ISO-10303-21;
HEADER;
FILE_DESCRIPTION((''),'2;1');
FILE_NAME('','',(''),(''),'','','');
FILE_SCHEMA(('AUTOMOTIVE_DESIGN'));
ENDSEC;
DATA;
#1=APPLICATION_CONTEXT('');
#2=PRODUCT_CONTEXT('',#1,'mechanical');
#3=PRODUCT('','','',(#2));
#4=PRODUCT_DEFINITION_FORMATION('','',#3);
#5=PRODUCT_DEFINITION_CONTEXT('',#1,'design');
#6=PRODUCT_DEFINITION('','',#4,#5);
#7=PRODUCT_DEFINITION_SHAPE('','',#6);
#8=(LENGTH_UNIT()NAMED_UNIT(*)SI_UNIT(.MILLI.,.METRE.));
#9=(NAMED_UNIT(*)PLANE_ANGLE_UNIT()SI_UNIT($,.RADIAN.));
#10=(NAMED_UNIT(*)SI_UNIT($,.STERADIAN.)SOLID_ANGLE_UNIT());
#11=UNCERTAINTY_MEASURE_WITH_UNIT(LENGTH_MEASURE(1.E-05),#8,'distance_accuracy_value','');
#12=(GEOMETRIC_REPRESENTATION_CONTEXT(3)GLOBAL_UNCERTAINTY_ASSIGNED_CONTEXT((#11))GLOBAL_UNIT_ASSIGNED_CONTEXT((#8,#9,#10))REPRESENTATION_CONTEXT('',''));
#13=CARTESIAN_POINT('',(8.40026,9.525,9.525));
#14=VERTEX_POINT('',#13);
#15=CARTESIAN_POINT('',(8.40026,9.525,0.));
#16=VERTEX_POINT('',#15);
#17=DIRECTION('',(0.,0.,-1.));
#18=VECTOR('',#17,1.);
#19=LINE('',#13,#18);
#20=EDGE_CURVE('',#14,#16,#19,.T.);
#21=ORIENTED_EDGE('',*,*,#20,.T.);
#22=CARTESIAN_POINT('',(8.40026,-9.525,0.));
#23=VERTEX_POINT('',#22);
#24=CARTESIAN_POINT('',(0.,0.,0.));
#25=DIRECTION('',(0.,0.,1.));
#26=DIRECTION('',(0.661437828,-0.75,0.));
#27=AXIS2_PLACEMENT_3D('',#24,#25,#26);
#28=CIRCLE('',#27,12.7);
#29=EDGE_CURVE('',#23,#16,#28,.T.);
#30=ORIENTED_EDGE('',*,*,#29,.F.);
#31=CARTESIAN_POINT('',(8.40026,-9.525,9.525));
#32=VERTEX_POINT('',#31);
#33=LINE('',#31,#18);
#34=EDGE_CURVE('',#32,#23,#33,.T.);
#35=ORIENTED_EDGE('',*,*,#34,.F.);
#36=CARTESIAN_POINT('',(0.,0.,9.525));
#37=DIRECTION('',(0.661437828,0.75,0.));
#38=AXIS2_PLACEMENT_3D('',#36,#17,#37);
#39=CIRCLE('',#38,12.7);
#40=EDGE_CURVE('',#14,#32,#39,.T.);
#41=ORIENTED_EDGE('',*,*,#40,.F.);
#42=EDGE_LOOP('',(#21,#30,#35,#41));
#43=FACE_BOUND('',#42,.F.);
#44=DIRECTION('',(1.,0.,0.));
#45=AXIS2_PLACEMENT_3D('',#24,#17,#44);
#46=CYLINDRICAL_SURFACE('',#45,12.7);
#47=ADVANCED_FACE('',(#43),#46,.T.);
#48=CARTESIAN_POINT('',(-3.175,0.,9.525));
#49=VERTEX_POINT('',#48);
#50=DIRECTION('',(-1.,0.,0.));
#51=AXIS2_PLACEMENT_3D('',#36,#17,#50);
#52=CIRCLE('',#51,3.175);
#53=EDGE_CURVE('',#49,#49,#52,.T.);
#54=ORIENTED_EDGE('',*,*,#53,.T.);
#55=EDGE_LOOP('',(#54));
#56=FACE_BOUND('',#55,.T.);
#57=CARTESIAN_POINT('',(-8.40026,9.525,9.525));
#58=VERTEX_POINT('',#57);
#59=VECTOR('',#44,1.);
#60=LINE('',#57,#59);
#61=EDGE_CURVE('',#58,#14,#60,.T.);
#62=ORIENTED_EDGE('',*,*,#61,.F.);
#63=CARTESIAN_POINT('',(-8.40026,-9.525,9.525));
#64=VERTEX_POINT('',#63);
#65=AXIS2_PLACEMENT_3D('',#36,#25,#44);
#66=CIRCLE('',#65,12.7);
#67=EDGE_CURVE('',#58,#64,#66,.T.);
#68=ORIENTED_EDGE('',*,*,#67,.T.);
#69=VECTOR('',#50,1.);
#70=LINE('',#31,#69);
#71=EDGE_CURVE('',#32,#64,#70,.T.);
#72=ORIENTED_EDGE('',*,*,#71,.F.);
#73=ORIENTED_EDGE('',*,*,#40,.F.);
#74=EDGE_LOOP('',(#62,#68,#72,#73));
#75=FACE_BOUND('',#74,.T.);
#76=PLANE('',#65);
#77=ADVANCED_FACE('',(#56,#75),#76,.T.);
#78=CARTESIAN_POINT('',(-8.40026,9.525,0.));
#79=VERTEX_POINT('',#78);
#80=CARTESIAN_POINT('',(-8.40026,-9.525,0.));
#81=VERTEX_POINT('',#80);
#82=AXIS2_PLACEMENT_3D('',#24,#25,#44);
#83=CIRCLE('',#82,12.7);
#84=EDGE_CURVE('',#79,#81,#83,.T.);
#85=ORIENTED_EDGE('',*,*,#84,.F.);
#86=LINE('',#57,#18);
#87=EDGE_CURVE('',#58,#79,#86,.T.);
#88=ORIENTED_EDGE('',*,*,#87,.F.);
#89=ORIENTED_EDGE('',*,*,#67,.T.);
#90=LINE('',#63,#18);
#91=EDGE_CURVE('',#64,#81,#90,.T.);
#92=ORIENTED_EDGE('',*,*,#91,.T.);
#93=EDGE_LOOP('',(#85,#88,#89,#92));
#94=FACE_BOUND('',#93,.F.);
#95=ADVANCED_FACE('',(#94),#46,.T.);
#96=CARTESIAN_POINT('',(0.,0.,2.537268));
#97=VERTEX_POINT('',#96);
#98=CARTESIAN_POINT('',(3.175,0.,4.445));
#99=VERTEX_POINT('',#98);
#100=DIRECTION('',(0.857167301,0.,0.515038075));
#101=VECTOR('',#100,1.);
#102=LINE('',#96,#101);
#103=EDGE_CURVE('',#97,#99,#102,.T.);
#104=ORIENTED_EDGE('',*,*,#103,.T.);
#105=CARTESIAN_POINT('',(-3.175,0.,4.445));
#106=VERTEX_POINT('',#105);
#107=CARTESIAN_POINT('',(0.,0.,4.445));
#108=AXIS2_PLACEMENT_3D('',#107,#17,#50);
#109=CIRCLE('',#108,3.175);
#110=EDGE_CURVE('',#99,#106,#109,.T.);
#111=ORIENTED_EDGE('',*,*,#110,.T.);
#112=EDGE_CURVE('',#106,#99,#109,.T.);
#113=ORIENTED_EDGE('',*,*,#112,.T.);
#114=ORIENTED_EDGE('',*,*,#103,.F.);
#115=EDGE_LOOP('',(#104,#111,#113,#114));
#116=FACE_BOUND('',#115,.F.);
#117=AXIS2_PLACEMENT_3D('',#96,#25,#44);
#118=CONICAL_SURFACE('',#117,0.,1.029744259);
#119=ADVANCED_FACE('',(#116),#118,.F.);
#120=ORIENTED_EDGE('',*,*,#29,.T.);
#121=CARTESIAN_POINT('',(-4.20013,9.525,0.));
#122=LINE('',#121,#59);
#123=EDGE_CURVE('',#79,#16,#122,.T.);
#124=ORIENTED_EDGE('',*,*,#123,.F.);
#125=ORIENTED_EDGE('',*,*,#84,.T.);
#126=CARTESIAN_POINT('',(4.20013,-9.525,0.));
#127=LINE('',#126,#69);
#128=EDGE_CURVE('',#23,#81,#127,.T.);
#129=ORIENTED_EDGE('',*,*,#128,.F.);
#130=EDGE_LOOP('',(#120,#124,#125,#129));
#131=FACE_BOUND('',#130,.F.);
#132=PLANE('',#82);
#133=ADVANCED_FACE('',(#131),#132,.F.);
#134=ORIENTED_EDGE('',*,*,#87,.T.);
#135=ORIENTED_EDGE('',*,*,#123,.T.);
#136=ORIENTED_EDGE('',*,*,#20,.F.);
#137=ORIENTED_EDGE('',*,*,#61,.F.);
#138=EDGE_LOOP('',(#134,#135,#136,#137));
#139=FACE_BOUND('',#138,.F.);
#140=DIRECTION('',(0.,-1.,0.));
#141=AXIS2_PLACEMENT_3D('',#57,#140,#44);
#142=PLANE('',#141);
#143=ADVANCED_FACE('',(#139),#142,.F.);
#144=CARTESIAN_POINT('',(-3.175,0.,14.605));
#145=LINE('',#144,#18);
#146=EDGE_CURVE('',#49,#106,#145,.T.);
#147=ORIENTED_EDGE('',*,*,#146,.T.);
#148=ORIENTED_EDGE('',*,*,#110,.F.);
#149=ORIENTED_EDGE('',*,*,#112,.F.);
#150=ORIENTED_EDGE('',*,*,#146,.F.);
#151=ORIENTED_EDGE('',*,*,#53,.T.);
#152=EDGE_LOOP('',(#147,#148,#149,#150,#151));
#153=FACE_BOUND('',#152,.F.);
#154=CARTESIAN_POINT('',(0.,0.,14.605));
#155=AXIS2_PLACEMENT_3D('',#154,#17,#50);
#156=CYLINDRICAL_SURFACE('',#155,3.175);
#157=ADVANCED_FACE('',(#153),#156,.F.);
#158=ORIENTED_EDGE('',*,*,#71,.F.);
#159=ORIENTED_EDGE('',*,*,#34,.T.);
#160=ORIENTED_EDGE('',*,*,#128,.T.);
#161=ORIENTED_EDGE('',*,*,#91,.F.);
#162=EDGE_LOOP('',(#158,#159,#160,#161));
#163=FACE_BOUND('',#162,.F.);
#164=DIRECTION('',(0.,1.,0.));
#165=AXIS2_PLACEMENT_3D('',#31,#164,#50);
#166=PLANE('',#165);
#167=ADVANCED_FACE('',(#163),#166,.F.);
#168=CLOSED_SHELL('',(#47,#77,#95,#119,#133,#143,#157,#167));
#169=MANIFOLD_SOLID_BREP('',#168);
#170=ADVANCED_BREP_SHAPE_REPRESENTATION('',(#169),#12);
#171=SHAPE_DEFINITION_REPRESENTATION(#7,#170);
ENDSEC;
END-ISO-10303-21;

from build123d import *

# Parameters (mm, degrees)
F0_R     = 12.7
F1_DEPTH = 9.525
F3_D     = 6.35
F3_DEPTH = 5.08
F3_TIP   = 1.9077324654
F5_DEPTH = 25.4


# Not quite as in the source:
# - a feature names something its author has since deleted; it is built from what else it names


with BuildPart() as f1:
    # F0 (on Top) → F1 (new body)
    with BuildSketch(Plane.XY):
        Circle(F0_R)
    extrude(amount=F1_DEPTH)

    # F3
    with Locations(Plane.XY.offset(9.525)):
        with Locations((0, 0)):
            Hole(F3_D / 2, depth=F3_DEPTH)
            with Locations((0, 0, -(F3_DEPTH + F3_TIP / 2))):  # 118° drill point
                Cone(0, F3_D / 2, F3_TIP, mode=Mode.SUBTRACT)

    # F4 (on face) → F5 (cut)
    with BuildSketch(Plane.XY.offset(9.525)):
        with BuildLine():
            Line((19.05, -9.525), (19.05, 9.525))
            Line((19.05, 9.525), (8.4002604126, 9.525))
            ThreePointArc((8.4002604126, 9.525), (11.5752604126, 5.2252604126), (12.7, 0))
            ThreePointArc((12.7, 0), (11.5752604126, -5.2252604126), (8.4002604126, -9.525))
            Line((8.4002604126, -9.525), (19.05, -9.525))
        make_face()
        with BuildLine():
            ThreePointArc((-8.4002604126, -9.525), (-12.7, 0), (-8.4002604126, 9.525))
            Line((-8.4002604126, 9.525), (-19.05, 9.525))
            Line((-19.05, 9.525), (-19.05, -9.525))
            Line((-19.05, -9.525), (-8.4002604126, -9.525))
        make_face()
        with BuildLine():
            ThreePointArc((-8.4002604126, -9.525), (0, -12.7), (8.4002604126, -9.525))
            Line((8.4002604126, -9.525), (-8.4002604126, -9.525))
        make_face()
        with BuildLine():
            Line((-8.4002604126, 9.525), (8.4002604126, 9.525))
            ThreePointArc((8.4002604126, 9.525), (0, 12.7), (-8.4002604126, 9.525))
        make_face()
    extrude(amount=-F5_DEPTH, mode=Mode.SUBTRACT)


solid = f1.part
